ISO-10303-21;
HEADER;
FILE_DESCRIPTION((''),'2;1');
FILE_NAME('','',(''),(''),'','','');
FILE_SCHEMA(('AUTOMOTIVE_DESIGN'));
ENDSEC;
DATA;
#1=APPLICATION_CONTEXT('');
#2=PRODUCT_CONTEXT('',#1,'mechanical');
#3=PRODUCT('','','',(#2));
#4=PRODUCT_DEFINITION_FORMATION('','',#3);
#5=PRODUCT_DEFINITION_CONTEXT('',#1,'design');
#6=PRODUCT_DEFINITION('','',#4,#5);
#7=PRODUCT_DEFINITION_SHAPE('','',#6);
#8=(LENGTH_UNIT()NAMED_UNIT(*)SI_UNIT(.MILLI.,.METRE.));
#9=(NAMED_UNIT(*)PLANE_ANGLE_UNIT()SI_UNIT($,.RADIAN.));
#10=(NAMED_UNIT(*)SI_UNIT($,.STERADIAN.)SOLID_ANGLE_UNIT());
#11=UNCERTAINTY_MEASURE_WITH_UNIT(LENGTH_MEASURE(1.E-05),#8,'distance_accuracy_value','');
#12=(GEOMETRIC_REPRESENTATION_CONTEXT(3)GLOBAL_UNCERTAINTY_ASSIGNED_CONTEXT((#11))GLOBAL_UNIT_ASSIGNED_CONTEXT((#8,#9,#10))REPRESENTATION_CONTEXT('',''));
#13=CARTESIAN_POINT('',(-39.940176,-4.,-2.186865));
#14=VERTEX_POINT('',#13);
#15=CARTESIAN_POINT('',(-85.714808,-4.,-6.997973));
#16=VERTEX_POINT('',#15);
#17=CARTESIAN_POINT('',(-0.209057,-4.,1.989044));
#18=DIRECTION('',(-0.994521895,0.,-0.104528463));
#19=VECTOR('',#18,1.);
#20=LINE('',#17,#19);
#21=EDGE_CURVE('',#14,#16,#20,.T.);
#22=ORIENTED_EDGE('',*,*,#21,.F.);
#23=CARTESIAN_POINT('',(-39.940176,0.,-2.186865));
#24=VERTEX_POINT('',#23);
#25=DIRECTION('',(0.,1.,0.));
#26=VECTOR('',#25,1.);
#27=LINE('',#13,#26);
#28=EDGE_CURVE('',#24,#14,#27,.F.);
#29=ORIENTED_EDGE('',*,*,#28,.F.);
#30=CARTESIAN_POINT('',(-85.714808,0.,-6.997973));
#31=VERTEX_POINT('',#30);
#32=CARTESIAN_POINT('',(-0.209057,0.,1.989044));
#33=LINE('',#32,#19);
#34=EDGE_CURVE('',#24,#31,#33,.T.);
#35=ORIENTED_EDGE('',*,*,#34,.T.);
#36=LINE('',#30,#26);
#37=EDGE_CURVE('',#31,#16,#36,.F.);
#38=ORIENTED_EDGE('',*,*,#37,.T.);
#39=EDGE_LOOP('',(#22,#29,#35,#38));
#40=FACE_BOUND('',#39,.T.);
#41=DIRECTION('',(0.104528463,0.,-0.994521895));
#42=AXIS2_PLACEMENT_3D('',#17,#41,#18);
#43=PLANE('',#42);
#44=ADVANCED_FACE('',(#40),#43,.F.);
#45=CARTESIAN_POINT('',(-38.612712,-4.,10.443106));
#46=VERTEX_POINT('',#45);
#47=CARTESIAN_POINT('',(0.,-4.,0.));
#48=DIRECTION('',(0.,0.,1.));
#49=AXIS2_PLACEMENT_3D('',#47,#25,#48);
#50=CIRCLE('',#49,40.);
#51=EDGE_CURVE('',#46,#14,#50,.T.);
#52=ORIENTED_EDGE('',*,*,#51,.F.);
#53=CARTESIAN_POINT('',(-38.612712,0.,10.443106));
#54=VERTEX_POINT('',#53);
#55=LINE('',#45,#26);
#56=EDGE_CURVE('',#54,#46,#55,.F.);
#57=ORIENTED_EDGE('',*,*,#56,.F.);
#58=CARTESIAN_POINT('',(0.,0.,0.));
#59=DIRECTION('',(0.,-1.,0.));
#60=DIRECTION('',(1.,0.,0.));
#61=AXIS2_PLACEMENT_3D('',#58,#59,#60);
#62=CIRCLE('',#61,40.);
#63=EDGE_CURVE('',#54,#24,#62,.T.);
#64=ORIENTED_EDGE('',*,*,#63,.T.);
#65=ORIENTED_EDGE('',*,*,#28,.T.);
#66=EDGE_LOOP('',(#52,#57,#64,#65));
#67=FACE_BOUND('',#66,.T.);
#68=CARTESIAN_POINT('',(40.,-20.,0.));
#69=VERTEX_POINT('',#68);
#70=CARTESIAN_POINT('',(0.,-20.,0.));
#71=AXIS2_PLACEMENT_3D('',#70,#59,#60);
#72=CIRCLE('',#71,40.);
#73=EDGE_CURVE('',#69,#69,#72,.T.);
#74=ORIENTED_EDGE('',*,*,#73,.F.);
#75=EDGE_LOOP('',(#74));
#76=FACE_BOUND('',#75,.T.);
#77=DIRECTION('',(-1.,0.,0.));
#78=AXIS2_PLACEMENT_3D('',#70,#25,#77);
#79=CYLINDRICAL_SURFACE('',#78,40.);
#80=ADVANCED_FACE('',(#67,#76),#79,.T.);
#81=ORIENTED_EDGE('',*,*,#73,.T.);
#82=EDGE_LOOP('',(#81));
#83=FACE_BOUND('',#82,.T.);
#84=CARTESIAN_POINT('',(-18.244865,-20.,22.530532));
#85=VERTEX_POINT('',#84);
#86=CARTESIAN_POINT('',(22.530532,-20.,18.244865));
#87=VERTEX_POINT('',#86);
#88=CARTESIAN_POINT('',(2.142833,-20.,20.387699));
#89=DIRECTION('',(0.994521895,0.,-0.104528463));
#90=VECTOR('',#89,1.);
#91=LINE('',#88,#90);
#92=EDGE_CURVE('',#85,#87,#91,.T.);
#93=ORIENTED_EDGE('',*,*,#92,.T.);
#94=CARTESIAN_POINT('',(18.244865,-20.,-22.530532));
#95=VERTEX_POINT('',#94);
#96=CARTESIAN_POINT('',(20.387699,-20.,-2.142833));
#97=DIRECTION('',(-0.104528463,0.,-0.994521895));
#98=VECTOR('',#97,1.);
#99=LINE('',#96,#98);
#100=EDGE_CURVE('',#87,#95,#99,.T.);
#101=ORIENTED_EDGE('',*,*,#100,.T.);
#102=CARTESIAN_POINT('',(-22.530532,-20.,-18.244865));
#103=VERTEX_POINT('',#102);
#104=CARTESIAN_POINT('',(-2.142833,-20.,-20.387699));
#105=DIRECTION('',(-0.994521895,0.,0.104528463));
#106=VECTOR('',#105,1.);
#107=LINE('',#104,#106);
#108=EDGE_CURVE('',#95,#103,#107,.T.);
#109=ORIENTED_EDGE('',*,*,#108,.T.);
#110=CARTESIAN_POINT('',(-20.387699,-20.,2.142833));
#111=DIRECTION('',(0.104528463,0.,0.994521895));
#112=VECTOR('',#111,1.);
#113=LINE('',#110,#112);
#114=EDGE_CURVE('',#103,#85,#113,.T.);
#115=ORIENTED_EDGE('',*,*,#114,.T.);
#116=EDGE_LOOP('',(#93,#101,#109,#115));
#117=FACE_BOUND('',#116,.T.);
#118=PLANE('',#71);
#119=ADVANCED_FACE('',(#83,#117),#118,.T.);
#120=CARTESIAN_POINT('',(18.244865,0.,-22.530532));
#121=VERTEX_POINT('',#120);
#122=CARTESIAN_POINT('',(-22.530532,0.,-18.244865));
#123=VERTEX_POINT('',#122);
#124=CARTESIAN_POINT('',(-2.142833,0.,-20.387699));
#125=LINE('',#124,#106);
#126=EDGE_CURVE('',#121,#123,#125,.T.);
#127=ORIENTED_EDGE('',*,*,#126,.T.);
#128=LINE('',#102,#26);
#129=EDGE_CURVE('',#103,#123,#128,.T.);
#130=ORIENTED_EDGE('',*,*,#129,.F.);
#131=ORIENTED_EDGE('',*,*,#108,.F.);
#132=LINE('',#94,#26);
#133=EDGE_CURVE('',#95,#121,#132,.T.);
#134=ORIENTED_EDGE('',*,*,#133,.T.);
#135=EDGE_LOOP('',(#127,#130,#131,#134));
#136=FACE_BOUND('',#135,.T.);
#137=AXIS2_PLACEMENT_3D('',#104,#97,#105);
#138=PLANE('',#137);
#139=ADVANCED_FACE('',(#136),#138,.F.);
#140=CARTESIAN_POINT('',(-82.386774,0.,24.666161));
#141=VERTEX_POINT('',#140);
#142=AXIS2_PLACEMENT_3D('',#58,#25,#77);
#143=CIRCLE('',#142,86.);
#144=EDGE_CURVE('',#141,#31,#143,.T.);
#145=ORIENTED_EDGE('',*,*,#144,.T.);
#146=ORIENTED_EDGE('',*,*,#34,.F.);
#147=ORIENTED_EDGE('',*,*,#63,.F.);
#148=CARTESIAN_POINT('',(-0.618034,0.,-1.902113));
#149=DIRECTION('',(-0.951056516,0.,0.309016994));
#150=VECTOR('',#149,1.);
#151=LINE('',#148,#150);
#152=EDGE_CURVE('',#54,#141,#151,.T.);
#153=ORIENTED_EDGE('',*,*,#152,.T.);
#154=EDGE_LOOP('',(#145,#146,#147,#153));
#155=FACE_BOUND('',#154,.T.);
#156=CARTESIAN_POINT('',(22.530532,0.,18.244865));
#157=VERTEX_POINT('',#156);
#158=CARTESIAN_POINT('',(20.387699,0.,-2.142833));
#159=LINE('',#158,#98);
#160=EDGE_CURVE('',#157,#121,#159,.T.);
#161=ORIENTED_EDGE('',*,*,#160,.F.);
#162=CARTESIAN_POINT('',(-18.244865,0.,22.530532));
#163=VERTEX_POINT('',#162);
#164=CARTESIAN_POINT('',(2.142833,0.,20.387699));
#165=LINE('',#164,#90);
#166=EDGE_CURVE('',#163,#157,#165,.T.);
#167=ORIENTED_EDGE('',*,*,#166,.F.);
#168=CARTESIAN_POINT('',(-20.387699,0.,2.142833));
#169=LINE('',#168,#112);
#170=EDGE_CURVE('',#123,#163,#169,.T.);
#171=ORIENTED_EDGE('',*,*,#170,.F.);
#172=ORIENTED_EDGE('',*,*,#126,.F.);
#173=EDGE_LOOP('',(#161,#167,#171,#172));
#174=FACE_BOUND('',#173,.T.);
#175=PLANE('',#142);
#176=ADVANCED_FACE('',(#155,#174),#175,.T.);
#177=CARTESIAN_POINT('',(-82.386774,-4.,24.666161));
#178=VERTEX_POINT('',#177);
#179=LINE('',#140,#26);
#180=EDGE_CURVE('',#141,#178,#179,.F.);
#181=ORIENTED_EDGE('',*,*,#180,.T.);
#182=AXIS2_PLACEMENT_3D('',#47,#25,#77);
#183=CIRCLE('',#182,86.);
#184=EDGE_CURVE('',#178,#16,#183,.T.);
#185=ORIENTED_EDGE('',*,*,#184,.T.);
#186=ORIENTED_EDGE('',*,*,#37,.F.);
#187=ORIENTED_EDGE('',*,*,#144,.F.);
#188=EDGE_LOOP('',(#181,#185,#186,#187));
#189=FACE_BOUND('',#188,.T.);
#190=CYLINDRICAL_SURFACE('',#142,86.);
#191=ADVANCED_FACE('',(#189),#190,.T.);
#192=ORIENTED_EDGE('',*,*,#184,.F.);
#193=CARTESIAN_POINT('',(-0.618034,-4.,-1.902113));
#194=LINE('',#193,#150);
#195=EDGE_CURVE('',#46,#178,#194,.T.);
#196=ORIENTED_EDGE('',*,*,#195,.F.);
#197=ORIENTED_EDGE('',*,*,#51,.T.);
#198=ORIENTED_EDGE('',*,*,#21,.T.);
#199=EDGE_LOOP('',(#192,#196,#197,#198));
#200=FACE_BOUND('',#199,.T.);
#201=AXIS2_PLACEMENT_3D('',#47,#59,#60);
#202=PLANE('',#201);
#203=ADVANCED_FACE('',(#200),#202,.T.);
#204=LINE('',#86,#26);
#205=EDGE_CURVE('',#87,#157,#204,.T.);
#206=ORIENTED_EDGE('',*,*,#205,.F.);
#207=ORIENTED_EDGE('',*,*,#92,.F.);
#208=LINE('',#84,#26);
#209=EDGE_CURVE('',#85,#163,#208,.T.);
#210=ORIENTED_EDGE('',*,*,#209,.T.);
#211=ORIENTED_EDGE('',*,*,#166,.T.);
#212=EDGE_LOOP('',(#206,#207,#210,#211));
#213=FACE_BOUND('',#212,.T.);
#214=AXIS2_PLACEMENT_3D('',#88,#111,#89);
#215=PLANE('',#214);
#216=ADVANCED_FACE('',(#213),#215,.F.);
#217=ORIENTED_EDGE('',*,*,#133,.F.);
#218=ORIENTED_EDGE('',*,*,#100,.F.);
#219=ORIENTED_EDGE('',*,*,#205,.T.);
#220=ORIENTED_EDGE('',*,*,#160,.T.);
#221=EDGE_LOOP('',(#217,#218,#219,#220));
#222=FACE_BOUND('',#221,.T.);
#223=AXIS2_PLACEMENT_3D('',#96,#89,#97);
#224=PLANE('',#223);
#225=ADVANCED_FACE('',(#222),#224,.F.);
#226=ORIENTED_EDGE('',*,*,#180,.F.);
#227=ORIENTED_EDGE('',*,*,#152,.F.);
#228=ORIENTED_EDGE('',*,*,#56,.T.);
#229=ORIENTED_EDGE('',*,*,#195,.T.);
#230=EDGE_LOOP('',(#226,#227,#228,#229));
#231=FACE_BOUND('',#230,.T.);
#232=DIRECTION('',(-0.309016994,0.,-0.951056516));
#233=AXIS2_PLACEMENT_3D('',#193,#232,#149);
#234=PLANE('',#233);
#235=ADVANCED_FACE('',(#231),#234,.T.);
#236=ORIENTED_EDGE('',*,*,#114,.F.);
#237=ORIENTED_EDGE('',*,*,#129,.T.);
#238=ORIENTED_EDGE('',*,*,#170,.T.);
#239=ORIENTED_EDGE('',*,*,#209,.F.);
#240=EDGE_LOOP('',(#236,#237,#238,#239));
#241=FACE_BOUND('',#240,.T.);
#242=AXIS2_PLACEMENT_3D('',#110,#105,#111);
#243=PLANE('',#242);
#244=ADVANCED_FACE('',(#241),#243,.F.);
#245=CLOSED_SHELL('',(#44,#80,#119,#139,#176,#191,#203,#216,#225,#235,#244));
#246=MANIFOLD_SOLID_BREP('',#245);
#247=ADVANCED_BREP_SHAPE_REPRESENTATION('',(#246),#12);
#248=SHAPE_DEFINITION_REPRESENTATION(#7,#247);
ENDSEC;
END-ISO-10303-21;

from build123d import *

# Parameters (mm, degrees)
SKETCH7_W               = 86
SKETCH7_H               = 4
CUT_EXTRUDE3_DEPTH      = 122.688125961
CUT_EXTRUDE3_DEPTH_BACK = 122.688125961
SKETCH9_R               = 40
CUT_EXTRUDE4_DEPTH      = 122.688125961
SKETCH10_R              = 40
BOSS_EXTRUDE1_DEPTH     = 20
CUT_EXTRUDE7_DEPTH      = 124.255831505


with BuildPart() as part:
    # Sketch7 → Revolve4 (revolve)
    with BuildSketch(Plane.XY):
        with Locations((-43, -2)):
            Rectangle(SKETCH7_W, SKETCH7_H)
    revolve(axis=Axis((0, 0, 0), (0, -1, 0)))

    # Sketch9 → Cut-Extrude3 (cut, two sides: drawn at the far end of the back side and taken through both)
    with BuildSketch(Plane(origin=(0, 0, 0), x_dir=(1, 0, 0), z_dir=(0, 1, 0)).offset(-CUT_EXTRUDE3_DEPTH_BACK)):
        Circle(SKETCH9_R)
    extrude(amount=CUT_EXTRUDE3_DEPTH + CUT_EXTRUDE3_DEPTH_BACK, mode=Mode.SUBTRACT)

    # Sketch1 → Cut-Extrude4 (cut, through all)
    with BuildSketch(Plane(origin=(0, 0, 0), x_dir=(1, 0, 0), z_dir=(0, 1, 0))):
        with BuildLine():
            Line((-86.191983256, -25.902548569), (-9.566772234, -1.00550828))
            Line((-9.566772234, -1.00550828), (-89.693924294, 7.416194762))
            ThreePointArc((-89.693924294, 7.416194762), (-89.506970583, -9.407561694), (-86.191983256, -25.902548569))
        make_face()
    extrude(amount=-CUT_EXTRUDE4_DEPTH, mode=Mode.SUBTRACT)

    # Sketch10 → Boss-Extrude1 (add)
    with BuildSketch(Plane(origin=(0, 0, 0), x_dir=(-1, 0, 0), z_dir=(0, -1, 0))):
        Circle(SKETCH10_R)
    extrude(amount=BOSS_EXTRUDE1_DEPTH)

    # Sketch14 → Cut-Extrude7 (cut, through all)
    with BuildSketch(Plane(origin=(0, 0, 0), x_dir=(1, 0, 0), z_dir=(0, 1, 0))):
        Polygon((22.530532352, -18.244865358), (18.244865358, 22.530532352), (-22.530532352, 18.244865358), (-18.244865358, -22.530532352), align=None)
    extrude(amount=-CUT_EXTRUDE7_DEPTH, mode=Mode.SUBTRACT)


solid = part.part
